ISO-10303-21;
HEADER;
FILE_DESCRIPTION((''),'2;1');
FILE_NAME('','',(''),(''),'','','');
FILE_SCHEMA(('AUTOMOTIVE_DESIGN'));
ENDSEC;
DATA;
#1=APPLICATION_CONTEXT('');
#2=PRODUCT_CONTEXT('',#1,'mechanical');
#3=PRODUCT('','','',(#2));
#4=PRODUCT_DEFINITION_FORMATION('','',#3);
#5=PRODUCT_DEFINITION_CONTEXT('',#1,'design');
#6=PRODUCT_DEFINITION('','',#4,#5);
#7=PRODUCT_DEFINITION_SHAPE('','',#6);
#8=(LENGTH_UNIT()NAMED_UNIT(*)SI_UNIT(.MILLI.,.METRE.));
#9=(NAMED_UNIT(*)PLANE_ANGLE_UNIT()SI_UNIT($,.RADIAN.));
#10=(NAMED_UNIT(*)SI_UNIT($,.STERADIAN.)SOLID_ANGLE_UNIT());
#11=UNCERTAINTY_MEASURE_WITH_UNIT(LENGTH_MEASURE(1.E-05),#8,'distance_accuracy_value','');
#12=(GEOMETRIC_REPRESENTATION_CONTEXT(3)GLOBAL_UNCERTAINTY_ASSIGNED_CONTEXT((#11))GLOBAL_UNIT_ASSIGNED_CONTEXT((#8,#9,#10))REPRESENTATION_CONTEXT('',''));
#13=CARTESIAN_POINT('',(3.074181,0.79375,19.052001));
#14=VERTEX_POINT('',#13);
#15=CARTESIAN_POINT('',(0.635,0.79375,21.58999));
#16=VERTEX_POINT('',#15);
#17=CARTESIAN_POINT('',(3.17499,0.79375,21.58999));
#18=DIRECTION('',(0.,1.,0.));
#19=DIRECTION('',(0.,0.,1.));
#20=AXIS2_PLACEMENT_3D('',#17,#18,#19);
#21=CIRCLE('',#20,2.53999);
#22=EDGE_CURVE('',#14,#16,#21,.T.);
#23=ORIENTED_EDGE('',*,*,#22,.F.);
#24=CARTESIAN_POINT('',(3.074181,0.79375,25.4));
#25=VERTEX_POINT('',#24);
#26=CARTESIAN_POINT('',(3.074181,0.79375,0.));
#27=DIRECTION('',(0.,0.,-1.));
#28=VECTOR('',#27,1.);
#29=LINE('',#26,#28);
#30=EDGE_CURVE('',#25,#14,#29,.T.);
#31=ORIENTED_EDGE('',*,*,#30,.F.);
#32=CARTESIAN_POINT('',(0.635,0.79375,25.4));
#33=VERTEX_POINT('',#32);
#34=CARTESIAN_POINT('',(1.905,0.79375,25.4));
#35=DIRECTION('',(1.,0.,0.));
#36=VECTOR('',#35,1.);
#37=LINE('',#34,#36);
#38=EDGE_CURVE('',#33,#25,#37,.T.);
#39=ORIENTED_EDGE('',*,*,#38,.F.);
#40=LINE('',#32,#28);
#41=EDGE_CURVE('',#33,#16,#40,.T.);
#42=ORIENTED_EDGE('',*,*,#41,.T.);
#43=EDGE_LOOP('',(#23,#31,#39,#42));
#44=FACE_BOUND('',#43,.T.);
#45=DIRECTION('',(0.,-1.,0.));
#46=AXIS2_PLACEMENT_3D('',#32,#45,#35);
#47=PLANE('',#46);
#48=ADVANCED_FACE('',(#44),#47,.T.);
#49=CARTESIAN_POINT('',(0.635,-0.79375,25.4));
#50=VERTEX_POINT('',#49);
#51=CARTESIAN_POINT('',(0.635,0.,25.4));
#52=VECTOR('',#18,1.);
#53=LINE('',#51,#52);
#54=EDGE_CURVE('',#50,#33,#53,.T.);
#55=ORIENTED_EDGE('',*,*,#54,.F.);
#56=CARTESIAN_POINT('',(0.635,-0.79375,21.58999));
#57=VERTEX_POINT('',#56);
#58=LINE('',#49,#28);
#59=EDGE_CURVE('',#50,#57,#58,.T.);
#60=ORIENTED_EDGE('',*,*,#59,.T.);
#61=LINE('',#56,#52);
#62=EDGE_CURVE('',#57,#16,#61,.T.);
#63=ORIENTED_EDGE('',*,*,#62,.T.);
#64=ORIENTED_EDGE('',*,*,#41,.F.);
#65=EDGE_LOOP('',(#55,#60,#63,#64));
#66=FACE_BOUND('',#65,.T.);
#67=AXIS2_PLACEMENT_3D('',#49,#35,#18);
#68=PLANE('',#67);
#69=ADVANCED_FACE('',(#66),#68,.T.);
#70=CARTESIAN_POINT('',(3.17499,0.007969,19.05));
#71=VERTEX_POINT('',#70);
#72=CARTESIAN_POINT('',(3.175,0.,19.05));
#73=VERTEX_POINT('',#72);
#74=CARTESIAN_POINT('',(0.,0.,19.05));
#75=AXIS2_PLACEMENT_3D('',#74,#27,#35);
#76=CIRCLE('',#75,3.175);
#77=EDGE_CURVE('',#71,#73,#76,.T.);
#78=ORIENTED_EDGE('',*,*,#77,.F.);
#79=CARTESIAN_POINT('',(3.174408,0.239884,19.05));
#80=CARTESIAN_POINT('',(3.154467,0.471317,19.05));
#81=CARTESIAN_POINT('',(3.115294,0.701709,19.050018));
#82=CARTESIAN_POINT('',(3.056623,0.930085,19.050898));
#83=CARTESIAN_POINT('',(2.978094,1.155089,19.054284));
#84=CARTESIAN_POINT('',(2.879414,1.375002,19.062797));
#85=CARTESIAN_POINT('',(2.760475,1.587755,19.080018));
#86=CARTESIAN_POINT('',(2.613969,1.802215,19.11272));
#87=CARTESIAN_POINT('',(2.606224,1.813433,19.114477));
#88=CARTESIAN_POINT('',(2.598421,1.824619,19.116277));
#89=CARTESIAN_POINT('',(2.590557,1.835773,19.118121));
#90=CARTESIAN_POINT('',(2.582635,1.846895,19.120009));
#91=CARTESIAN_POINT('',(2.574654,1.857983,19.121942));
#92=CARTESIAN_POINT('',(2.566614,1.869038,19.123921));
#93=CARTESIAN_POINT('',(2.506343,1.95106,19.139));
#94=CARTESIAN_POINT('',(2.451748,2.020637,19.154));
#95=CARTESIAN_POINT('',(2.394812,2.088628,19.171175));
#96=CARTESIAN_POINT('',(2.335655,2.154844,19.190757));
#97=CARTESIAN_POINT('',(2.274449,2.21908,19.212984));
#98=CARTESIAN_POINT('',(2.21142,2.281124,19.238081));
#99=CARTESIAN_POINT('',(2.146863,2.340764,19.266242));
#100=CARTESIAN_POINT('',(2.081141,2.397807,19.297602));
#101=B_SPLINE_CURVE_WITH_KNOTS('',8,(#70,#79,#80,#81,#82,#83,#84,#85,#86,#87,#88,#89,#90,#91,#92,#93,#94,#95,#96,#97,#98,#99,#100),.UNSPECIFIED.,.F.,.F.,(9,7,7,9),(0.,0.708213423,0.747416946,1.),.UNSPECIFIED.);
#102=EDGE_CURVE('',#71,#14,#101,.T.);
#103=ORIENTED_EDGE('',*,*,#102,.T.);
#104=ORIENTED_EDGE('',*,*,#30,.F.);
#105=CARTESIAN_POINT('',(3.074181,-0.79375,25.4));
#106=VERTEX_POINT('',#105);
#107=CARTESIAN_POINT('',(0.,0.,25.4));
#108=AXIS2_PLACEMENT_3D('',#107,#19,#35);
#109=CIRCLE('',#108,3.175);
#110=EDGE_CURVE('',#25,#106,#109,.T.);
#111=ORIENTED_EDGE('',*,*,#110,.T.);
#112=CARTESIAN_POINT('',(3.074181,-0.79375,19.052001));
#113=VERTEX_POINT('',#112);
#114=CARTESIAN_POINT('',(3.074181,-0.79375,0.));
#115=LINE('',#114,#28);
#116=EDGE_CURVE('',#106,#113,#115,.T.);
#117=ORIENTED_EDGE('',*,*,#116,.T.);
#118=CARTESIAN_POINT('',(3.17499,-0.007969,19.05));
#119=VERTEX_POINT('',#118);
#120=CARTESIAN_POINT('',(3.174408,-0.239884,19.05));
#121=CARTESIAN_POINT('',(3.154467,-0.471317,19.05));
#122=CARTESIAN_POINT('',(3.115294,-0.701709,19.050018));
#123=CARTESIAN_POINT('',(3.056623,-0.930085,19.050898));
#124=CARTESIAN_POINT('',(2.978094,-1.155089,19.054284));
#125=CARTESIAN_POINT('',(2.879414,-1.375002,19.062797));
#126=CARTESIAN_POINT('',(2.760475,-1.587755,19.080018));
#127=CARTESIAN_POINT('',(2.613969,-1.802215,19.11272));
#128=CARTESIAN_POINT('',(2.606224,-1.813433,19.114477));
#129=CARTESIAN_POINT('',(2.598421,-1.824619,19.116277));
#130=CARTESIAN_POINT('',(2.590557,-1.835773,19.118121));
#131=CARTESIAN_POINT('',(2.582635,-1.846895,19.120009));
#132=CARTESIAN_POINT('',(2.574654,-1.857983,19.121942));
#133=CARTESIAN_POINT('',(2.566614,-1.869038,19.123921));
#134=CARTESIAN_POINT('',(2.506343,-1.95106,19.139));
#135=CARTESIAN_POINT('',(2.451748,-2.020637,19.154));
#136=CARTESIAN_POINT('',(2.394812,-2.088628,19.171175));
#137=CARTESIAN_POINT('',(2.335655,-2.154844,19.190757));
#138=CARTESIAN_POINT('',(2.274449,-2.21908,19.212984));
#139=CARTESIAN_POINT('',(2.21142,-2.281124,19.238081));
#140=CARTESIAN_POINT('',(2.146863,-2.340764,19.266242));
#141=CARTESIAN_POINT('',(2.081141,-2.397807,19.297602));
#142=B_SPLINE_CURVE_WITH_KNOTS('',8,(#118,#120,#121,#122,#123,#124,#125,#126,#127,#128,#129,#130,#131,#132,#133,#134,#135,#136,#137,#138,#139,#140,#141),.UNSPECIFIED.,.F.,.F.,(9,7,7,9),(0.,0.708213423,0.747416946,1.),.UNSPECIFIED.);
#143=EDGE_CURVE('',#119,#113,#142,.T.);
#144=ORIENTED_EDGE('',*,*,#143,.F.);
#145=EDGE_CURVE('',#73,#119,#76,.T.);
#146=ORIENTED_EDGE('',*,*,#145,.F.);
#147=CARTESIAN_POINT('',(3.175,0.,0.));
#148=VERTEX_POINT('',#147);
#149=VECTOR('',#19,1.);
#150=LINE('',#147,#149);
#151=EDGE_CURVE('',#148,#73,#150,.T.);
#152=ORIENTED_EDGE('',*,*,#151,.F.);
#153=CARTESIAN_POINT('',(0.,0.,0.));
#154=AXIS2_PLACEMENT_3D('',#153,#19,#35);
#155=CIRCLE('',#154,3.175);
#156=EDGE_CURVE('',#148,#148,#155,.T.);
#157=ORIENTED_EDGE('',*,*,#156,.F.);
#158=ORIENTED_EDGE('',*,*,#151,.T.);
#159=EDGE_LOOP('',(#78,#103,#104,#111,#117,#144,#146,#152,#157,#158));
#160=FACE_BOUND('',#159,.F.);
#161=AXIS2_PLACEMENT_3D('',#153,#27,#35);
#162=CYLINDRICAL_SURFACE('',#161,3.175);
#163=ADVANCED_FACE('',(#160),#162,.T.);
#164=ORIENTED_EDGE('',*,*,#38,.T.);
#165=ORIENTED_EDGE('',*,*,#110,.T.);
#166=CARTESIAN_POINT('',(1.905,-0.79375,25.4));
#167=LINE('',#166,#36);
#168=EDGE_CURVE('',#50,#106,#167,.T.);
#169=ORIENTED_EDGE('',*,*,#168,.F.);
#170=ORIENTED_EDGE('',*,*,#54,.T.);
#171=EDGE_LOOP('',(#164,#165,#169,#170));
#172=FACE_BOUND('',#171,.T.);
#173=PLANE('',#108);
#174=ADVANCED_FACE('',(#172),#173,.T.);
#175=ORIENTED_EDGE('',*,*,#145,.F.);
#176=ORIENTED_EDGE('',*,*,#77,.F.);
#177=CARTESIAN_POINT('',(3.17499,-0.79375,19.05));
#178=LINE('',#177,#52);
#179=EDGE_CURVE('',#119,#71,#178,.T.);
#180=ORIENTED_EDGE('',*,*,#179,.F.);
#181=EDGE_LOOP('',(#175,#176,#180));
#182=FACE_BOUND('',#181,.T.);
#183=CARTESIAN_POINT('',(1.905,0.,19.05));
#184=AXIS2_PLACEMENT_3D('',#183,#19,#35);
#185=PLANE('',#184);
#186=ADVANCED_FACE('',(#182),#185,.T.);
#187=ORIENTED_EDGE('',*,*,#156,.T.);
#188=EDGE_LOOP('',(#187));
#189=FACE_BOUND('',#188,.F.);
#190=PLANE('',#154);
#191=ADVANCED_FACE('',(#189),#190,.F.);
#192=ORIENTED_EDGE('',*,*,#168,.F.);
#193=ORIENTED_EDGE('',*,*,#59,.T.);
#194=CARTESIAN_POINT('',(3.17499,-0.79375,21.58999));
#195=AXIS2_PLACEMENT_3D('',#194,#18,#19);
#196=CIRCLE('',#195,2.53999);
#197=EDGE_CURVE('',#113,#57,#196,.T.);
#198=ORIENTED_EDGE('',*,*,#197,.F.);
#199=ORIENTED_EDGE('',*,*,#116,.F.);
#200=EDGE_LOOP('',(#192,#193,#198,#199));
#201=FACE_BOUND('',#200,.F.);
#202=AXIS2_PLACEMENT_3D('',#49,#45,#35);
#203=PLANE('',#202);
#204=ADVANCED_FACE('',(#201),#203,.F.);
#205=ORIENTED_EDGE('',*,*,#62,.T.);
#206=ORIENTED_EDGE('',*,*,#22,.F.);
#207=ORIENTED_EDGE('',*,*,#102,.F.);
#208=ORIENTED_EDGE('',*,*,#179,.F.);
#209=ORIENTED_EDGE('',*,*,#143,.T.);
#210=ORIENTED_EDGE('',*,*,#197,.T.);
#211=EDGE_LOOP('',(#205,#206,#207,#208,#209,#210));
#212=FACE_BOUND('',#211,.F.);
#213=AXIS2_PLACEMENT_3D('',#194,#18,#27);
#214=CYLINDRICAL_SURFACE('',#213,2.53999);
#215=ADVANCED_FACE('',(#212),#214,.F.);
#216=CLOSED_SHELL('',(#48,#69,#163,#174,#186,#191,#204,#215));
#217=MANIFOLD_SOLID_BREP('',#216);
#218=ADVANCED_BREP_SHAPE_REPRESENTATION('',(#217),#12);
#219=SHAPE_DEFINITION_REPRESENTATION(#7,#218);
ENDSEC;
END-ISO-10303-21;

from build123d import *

# Parameters (mm, degrees)
F0_R     = 3.175
F1_DEPTH = 25.4
F2_W     = 2.54
F2_H     = 1.5875
F3_DEPTH = 6.35
F4_R     = 2.53999


# Not quite as in the source:
# - a fillet or chamfer is up to 0.001 mm smaller than in the source, because OpenCascade refuses the exact size


with BuildPart() as f1:
    # F0 (on Top) → F1 (new body)
    with BuildSketch(Plane.XY):
        Circle(F0_R)
    extrude(amount=F1_DEPTH)

    # F2 (on face) → F3 (cut)
    with BuildSketch(Plane.XY.offset(25.4)):
        with Locations((1.905, 0)):
            Rectangle(F2_W, F2_H)
    extrude(amount=-F3_DEPTH, mode=Mode.SUBTRACT)

    # F4 (radius 2.54 in the source; OpenCascade refuses exactly that, so slightly less here)
    f4_edges = [f1.edges().sort_by_distance(p)[0] for p in [
        (0.635, 0, 19.05),
    ]]
    fillet(f4_edges, radius=F4_R)


solid = f1.part
